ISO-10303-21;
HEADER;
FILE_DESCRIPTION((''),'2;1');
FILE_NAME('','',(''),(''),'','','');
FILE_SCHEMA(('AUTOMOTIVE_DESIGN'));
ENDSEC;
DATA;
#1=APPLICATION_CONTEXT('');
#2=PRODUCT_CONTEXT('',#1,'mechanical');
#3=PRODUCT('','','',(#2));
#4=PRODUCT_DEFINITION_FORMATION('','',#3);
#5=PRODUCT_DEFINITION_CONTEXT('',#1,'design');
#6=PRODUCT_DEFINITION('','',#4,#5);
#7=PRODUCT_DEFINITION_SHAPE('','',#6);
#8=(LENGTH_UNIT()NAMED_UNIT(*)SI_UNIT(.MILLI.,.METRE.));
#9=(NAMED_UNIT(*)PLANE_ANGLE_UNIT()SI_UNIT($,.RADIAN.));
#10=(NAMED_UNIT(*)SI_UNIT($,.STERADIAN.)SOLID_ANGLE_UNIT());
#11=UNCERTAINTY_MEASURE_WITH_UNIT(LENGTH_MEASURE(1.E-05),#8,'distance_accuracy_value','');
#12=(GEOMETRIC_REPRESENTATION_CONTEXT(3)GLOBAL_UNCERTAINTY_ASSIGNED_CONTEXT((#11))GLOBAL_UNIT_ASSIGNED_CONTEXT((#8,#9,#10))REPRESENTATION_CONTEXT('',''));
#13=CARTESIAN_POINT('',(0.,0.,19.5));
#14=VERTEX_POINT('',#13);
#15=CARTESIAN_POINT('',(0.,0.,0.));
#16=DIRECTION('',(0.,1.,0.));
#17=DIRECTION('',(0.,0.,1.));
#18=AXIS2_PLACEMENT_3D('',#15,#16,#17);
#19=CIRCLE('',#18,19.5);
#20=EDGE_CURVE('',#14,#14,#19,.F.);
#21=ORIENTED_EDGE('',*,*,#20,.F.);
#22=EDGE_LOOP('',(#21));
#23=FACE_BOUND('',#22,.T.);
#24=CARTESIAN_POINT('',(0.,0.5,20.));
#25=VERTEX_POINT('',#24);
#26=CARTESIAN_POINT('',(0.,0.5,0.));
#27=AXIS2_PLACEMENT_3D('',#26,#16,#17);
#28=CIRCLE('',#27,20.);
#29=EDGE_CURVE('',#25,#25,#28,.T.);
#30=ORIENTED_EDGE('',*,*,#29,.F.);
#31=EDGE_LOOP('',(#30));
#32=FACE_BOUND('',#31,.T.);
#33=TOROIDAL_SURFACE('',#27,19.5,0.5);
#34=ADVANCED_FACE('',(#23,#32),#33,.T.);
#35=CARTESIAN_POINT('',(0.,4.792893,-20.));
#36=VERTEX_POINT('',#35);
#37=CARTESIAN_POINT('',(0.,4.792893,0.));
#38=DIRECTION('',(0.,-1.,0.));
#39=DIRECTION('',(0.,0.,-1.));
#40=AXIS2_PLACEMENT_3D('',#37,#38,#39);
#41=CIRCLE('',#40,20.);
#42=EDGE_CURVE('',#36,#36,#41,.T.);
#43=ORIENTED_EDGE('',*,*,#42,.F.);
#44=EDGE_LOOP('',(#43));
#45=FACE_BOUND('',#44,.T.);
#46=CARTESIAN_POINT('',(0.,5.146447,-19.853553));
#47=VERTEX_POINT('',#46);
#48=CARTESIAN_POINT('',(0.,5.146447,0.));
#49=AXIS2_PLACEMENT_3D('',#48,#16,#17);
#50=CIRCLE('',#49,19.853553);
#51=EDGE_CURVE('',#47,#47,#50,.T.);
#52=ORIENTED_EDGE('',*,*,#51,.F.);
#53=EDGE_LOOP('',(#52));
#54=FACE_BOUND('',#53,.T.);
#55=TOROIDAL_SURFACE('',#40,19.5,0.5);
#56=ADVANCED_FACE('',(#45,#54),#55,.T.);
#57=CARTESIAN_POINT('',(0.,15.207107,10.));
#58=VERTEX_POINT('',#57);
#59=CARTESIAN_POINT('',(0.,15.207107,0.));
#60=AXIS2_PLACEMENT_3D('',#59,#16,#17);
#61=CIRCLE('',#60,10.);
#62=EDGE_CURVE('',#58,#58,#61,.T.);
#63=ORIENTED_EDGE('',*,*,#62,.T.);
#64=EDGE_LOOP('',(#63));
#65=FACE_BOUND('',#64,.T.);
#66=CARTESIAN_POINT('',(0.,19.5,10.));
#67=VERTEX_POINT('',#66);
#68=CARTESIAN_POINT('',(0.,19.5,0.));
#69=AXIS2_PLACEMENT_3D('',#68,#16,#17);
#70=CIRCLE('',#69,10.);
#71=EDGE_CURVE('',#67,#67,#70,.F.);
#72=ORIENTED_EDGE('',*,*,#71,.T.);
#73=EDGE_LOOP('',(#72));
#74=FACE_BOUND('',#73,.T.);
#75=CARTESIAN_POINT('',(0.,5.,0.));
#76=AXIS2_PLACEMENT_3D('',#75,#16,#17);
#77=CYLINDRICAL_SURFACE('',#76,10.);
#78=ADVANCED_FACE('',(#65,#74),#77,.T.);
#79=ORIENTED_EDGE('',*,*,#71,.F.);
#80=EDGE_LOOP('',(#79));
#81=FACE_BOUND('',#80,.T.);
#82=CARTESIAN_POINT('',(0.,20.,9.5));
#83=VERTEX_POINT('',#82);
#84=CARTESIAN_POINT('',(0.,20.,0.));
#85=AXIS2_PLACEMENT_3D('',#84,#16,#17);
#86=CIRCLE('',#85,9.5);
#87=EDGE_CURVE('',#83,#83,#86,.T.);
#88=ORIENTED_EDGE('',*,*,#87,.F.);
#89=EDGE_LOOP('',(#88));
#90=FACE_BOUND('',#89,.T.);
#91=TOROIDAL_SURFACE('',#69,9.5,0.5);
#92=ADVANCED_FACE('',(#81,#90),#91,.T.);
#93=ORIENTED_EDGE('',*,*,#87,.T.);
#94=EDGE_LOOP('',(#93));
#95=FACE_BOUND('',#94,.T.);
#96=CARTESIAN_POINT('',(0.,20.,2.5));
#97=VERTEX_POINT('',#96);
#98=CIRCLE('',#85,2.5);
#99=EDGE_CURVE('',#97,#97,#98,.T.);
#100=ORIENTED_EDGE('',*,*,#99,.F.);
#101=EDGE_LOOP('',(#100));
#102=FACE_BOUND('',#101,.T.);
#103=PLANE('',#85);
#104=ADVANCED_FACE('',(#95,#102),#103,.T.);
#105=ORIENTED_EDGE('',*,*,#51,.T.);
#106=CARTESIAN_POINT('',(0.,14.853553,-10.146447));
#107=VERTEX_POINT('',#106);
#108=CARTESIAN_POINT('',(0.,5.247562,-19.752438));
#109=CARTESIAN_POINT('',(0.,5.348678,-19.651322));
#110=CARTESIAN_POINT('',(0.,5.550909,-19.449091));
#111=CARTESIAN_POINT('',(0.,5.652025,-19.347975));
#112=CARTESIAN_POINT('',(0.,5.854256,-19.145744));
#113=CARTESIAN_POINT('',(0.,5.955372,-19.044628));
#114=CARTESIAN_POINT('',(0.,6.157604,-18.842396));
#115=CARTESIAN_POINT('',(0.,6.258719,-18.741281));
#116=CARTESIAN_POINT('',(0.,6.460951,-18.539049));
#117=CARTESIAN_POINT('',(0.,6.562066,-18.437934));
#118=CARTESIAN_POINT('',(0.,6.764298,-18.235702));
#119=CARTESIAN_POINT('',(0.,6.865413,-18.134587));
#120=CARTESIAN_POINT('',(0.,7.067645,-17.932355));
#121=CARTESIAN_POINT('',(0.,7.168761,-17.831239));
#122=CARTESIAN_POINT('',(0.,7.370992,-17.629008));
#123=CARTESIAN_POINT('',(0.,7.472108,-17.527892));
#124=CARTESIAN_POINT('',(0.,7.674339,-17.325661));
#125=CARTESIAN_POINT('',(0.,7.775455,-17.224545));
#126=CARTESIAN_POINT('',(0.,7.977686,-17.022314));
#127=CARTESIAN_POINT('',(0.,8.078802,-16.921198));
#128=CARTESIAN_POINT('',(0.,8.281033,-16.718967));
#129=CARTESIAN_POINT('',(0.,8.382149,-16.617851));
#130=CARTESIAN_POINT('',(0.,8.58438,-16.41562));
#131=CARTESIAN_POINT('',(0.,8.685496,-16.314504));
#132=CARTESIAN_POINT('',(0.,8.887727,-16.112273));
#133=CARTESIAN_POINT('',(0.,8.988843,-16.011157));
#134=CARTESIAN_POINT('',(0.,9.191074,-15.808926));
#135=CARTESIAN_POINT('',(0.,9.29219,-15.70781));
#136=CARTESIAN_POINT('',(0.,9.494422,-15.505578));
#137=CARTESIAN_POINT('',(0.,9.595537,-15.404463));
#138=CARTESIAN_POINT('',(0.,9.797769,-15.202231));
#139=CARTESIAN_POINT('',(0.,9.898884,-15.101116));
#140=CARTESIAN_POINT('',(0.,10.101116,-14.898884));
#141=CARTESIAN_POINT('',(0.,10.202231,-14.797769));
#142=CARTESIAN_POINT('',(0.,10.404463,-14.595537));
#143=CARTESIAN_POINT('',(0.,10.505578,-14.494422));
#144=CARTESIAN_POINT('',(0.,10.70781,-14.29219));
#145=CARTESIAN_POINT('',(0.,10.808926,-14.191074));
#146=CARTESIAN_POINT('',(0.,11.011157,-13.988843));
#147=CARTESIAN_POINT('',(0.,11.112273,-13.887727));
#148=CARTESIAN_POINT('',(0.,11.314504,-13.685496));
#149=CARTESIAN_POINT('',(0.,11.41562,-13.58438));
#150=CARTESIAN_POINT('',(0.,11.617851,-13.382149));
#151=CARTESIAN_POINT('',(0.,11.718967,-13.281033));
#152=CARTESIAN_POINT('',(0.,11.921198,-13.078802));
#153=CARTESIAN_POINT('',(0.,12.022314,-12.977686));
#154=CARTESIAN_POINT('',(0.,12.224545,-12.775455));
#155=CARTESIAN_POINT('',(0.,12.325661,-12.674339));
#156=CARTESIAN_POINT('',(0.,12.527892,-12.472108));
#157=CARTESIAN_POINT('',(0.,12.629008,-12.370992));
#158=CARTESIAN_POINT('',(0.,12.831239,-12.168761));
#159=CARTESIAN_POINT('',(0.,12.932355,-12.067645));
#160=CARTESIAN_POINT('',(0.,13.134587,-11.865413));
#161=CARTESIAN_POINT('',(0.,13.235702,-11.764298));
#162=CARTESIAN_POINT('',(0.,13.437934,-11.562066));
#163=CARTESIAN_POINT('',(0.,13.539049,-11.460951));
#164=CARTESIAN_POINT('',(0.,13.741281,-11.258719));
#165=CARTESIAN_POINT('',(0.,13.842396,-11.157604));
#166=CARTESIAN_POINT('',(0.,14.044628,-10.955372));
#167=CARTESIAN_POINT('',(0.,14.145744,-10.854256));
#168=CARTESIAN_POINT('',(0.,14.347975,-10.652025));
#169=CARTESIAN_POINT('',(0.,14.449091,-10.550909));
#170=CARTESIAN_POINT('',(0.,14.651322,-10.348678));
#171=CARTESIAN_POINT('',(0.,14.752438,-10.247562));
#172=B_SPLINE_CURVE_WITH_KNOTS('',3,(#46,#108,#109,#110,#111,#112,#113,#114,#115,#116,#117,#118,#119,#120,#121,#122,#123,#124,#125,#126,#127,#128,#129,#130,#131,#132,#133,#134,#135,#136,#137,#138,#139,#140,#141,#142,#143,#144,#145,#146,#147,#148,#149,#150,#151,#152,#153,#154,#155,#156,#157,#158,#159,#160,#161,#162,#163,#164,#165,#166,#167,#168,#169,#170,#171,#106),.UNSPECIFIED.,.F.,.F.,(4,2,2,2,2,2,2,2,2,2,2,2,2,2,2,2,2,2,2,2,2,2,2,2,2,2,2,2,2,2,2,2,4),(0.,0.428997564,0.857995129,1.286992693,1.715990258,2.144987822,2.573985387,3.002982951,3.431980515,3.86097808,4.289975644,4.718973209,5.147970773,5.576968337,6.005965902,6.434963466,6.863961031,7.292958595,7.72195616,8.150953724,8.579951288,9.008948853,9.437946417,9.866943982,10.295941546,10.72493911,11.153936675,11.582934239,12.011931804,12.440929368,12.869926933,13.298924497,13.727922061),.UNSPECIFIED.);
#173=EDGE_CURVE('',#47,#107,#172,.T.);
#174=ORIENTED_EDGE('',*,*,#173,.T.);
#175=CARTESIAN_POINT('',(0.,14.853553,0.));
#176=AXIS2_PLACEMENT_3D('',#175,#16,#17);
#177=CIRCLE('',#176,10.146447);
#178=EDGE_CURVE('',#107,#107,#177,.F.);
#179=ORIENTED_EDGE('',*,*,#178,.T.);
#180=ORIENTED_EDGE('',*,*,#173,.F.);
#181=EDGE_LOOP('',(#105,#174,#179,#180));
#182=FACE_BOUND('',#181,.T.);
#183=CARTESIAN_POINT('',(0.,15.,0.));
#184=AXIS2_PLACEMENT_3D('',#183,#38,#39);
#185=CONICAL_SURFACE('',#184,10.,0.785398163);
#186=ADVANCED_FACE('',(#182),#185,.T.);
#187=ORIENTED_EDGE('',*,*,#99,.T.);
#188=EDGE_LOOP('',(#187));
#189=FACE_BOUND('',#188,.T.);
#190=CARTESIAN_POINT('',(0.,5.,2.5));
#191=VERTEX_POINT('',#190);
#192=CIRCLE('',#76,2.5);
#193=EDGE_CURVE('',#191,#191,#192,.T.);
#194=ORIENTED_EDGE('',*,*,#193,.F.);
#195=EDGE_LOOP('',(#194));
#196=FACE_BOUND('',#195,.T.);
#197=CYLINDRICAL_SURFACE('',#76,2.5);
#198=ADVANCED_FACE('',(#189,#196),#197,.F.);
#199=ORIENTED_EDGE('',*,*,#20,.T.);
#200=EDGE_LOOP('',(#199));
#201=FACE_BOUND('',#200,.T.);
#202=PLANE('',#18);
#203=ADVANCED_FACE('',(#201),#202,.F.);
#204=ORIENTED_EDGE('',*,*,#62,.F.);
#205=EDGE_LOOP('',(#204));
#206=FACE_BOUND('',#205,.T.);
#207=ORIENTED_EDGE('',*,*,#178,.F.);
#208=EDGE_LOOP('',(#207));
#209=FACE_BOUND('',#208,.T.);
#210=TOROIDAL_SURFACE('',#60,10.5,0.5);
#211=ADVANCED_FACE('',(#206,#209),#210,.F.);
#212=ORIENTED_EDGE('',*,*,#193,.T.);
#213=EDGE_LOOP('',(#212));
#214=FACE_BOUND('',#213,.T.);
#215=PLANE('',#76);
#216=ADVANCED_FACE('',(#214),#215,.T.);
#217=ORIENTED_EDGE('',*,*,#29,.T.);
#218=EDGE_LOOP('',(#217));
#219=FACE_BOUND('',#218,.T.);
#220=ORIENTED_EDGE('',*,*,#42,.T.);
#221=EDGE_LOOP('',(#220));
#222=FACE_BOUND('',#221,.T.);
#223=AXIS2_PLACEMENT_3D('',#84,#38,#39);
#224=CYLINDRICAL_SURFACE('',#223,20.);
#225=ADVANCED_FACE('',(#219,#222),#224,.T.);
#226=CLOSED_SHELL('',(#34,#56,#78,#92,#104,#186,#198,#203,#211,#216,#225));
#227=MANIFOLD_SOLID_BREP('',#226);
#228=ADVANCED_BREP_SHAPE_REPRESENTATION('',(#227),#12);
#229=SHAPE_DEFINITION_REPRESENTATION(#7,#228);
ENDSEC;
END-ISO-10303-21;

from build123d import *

# Parameters (mm, degrees)
SKETCH1_R           = 20
BOSS_EXTRUDE1_DEPTH = 20
CUT_EXTRUDE1_START  = -15
SKETCH2_R           = 20
SKETCH2_R_2         = 10
SKETCH2_R_3         = 2.5
CUT_EXTRUDE1_DEPTH  = 15
CHAMFER1_SIZE       = 10


with BuildPart() as part:
    # Sketch1 → Boss-Extrude1 (new body)
    with BuildSketch(Plane(origin=(0, 0, 0), x_dir=(1, 0, 0), z_dir=(0, 1, 0))):
        with Locations(Location((0, 0, 0), (0, 0, 270))):
            Circle(SKETCH1_R)
    extrude(amount=BOSS_EXTRUDE1_DEPTH)

    # Sketch2 → Cut-Extrude1 (cut)
    # profile 1 of 2: a face of its own
    with BuildSketch(Plane(origin=(0, 20, 0), x_dir=(1, 0, 0), z_dir=(0, 1, 0)).offset(CUT_EXTRUDE1_START)):
        with Locations(Location((0, 0, 0), (0, 0, 270))):
            Circle(SKETCH2_R)
        with Locations(Location((0, 0, 0), (0, 0, 270))):
            Circle(SKETCH2_R_2, mode=Mode.SUBTRACT)
    # profile 2 of 2: a face of its own
    with BuildSketch(Plane(origin=(0, 20, 0), x_dir=(1, 0, 0), z_dir=(0, 1, 0)).offset(CUT_EXTRUDE1_START)):
        with Locations(Location((0, 0, 0), (0, 0, 270))):
            Circle(SKETCH2_R_3)
    extrude(amount=CUT_EXTRUDE1_DEPTH, mode=Mode.SUBTRACT)

    # Chamfer1
    chamfer1_edges = [part.edges().sort_by_distance(p)[0] for p in [
        (0, 5, -10),
    ]]
    chamfer(chamfer1_edges, length=CHAMFER1_SIZE - 0.0001)  # a hair under: the kernel refuses the full size

    # Fillet2: read off the stored shape, not the designer's step
    # Fillet2 outline → Fillet2 (revolve, cut)
    with BuildSketch(Plane.XY):
        with BuildLine():
            Line((20, 5.146446609), (19.853553391, 5.146446609))
            ThreePointArc((19.853553391, 5.146446609), (19.961939766, 4.984234935), (20, 4.792893219))
            Line((20, 4.792893219), (20, 5.146446609))
        make_face()
        with BuildLine():
            Line((20, 0), (20, 0.5))
            ThreePointArc((20, 0.5), (19.853553391, 0.146446609), (19.5, 0))
            Line((19.5, 0), (20, 0))
        make_face()
        with BuildLine():
            ThreePointArc((9.5, 20), (9.853553391, 19.853553391), (10, 19.5))
            Line((10, 19.5), (10, 20))
            Line((10, 20), (9.5, 20))
        make_face()
    revolve(axis=Axis((0, 0, 0), (0, 1, 0)), mode=Mode.SUBTRACT)

    # Fillet2 2 outline → Fillet2 2 (revolve)
    with BuildSketch(Plane.XY):
        with BuildLine():
            Line((10, 14.853553391), (10.146446609, 14.853553391))
            ThreePointArc((10.146446609, 14.853553391), (10.038060234, 15.015765065), (10, 15.207106781))
            Line((10, 15.207106781), (10, 14.853553391))
        make_face()
    revolve(axis=Axis((0, 0, 0), (0, 1, 0)))


solid = part.part
